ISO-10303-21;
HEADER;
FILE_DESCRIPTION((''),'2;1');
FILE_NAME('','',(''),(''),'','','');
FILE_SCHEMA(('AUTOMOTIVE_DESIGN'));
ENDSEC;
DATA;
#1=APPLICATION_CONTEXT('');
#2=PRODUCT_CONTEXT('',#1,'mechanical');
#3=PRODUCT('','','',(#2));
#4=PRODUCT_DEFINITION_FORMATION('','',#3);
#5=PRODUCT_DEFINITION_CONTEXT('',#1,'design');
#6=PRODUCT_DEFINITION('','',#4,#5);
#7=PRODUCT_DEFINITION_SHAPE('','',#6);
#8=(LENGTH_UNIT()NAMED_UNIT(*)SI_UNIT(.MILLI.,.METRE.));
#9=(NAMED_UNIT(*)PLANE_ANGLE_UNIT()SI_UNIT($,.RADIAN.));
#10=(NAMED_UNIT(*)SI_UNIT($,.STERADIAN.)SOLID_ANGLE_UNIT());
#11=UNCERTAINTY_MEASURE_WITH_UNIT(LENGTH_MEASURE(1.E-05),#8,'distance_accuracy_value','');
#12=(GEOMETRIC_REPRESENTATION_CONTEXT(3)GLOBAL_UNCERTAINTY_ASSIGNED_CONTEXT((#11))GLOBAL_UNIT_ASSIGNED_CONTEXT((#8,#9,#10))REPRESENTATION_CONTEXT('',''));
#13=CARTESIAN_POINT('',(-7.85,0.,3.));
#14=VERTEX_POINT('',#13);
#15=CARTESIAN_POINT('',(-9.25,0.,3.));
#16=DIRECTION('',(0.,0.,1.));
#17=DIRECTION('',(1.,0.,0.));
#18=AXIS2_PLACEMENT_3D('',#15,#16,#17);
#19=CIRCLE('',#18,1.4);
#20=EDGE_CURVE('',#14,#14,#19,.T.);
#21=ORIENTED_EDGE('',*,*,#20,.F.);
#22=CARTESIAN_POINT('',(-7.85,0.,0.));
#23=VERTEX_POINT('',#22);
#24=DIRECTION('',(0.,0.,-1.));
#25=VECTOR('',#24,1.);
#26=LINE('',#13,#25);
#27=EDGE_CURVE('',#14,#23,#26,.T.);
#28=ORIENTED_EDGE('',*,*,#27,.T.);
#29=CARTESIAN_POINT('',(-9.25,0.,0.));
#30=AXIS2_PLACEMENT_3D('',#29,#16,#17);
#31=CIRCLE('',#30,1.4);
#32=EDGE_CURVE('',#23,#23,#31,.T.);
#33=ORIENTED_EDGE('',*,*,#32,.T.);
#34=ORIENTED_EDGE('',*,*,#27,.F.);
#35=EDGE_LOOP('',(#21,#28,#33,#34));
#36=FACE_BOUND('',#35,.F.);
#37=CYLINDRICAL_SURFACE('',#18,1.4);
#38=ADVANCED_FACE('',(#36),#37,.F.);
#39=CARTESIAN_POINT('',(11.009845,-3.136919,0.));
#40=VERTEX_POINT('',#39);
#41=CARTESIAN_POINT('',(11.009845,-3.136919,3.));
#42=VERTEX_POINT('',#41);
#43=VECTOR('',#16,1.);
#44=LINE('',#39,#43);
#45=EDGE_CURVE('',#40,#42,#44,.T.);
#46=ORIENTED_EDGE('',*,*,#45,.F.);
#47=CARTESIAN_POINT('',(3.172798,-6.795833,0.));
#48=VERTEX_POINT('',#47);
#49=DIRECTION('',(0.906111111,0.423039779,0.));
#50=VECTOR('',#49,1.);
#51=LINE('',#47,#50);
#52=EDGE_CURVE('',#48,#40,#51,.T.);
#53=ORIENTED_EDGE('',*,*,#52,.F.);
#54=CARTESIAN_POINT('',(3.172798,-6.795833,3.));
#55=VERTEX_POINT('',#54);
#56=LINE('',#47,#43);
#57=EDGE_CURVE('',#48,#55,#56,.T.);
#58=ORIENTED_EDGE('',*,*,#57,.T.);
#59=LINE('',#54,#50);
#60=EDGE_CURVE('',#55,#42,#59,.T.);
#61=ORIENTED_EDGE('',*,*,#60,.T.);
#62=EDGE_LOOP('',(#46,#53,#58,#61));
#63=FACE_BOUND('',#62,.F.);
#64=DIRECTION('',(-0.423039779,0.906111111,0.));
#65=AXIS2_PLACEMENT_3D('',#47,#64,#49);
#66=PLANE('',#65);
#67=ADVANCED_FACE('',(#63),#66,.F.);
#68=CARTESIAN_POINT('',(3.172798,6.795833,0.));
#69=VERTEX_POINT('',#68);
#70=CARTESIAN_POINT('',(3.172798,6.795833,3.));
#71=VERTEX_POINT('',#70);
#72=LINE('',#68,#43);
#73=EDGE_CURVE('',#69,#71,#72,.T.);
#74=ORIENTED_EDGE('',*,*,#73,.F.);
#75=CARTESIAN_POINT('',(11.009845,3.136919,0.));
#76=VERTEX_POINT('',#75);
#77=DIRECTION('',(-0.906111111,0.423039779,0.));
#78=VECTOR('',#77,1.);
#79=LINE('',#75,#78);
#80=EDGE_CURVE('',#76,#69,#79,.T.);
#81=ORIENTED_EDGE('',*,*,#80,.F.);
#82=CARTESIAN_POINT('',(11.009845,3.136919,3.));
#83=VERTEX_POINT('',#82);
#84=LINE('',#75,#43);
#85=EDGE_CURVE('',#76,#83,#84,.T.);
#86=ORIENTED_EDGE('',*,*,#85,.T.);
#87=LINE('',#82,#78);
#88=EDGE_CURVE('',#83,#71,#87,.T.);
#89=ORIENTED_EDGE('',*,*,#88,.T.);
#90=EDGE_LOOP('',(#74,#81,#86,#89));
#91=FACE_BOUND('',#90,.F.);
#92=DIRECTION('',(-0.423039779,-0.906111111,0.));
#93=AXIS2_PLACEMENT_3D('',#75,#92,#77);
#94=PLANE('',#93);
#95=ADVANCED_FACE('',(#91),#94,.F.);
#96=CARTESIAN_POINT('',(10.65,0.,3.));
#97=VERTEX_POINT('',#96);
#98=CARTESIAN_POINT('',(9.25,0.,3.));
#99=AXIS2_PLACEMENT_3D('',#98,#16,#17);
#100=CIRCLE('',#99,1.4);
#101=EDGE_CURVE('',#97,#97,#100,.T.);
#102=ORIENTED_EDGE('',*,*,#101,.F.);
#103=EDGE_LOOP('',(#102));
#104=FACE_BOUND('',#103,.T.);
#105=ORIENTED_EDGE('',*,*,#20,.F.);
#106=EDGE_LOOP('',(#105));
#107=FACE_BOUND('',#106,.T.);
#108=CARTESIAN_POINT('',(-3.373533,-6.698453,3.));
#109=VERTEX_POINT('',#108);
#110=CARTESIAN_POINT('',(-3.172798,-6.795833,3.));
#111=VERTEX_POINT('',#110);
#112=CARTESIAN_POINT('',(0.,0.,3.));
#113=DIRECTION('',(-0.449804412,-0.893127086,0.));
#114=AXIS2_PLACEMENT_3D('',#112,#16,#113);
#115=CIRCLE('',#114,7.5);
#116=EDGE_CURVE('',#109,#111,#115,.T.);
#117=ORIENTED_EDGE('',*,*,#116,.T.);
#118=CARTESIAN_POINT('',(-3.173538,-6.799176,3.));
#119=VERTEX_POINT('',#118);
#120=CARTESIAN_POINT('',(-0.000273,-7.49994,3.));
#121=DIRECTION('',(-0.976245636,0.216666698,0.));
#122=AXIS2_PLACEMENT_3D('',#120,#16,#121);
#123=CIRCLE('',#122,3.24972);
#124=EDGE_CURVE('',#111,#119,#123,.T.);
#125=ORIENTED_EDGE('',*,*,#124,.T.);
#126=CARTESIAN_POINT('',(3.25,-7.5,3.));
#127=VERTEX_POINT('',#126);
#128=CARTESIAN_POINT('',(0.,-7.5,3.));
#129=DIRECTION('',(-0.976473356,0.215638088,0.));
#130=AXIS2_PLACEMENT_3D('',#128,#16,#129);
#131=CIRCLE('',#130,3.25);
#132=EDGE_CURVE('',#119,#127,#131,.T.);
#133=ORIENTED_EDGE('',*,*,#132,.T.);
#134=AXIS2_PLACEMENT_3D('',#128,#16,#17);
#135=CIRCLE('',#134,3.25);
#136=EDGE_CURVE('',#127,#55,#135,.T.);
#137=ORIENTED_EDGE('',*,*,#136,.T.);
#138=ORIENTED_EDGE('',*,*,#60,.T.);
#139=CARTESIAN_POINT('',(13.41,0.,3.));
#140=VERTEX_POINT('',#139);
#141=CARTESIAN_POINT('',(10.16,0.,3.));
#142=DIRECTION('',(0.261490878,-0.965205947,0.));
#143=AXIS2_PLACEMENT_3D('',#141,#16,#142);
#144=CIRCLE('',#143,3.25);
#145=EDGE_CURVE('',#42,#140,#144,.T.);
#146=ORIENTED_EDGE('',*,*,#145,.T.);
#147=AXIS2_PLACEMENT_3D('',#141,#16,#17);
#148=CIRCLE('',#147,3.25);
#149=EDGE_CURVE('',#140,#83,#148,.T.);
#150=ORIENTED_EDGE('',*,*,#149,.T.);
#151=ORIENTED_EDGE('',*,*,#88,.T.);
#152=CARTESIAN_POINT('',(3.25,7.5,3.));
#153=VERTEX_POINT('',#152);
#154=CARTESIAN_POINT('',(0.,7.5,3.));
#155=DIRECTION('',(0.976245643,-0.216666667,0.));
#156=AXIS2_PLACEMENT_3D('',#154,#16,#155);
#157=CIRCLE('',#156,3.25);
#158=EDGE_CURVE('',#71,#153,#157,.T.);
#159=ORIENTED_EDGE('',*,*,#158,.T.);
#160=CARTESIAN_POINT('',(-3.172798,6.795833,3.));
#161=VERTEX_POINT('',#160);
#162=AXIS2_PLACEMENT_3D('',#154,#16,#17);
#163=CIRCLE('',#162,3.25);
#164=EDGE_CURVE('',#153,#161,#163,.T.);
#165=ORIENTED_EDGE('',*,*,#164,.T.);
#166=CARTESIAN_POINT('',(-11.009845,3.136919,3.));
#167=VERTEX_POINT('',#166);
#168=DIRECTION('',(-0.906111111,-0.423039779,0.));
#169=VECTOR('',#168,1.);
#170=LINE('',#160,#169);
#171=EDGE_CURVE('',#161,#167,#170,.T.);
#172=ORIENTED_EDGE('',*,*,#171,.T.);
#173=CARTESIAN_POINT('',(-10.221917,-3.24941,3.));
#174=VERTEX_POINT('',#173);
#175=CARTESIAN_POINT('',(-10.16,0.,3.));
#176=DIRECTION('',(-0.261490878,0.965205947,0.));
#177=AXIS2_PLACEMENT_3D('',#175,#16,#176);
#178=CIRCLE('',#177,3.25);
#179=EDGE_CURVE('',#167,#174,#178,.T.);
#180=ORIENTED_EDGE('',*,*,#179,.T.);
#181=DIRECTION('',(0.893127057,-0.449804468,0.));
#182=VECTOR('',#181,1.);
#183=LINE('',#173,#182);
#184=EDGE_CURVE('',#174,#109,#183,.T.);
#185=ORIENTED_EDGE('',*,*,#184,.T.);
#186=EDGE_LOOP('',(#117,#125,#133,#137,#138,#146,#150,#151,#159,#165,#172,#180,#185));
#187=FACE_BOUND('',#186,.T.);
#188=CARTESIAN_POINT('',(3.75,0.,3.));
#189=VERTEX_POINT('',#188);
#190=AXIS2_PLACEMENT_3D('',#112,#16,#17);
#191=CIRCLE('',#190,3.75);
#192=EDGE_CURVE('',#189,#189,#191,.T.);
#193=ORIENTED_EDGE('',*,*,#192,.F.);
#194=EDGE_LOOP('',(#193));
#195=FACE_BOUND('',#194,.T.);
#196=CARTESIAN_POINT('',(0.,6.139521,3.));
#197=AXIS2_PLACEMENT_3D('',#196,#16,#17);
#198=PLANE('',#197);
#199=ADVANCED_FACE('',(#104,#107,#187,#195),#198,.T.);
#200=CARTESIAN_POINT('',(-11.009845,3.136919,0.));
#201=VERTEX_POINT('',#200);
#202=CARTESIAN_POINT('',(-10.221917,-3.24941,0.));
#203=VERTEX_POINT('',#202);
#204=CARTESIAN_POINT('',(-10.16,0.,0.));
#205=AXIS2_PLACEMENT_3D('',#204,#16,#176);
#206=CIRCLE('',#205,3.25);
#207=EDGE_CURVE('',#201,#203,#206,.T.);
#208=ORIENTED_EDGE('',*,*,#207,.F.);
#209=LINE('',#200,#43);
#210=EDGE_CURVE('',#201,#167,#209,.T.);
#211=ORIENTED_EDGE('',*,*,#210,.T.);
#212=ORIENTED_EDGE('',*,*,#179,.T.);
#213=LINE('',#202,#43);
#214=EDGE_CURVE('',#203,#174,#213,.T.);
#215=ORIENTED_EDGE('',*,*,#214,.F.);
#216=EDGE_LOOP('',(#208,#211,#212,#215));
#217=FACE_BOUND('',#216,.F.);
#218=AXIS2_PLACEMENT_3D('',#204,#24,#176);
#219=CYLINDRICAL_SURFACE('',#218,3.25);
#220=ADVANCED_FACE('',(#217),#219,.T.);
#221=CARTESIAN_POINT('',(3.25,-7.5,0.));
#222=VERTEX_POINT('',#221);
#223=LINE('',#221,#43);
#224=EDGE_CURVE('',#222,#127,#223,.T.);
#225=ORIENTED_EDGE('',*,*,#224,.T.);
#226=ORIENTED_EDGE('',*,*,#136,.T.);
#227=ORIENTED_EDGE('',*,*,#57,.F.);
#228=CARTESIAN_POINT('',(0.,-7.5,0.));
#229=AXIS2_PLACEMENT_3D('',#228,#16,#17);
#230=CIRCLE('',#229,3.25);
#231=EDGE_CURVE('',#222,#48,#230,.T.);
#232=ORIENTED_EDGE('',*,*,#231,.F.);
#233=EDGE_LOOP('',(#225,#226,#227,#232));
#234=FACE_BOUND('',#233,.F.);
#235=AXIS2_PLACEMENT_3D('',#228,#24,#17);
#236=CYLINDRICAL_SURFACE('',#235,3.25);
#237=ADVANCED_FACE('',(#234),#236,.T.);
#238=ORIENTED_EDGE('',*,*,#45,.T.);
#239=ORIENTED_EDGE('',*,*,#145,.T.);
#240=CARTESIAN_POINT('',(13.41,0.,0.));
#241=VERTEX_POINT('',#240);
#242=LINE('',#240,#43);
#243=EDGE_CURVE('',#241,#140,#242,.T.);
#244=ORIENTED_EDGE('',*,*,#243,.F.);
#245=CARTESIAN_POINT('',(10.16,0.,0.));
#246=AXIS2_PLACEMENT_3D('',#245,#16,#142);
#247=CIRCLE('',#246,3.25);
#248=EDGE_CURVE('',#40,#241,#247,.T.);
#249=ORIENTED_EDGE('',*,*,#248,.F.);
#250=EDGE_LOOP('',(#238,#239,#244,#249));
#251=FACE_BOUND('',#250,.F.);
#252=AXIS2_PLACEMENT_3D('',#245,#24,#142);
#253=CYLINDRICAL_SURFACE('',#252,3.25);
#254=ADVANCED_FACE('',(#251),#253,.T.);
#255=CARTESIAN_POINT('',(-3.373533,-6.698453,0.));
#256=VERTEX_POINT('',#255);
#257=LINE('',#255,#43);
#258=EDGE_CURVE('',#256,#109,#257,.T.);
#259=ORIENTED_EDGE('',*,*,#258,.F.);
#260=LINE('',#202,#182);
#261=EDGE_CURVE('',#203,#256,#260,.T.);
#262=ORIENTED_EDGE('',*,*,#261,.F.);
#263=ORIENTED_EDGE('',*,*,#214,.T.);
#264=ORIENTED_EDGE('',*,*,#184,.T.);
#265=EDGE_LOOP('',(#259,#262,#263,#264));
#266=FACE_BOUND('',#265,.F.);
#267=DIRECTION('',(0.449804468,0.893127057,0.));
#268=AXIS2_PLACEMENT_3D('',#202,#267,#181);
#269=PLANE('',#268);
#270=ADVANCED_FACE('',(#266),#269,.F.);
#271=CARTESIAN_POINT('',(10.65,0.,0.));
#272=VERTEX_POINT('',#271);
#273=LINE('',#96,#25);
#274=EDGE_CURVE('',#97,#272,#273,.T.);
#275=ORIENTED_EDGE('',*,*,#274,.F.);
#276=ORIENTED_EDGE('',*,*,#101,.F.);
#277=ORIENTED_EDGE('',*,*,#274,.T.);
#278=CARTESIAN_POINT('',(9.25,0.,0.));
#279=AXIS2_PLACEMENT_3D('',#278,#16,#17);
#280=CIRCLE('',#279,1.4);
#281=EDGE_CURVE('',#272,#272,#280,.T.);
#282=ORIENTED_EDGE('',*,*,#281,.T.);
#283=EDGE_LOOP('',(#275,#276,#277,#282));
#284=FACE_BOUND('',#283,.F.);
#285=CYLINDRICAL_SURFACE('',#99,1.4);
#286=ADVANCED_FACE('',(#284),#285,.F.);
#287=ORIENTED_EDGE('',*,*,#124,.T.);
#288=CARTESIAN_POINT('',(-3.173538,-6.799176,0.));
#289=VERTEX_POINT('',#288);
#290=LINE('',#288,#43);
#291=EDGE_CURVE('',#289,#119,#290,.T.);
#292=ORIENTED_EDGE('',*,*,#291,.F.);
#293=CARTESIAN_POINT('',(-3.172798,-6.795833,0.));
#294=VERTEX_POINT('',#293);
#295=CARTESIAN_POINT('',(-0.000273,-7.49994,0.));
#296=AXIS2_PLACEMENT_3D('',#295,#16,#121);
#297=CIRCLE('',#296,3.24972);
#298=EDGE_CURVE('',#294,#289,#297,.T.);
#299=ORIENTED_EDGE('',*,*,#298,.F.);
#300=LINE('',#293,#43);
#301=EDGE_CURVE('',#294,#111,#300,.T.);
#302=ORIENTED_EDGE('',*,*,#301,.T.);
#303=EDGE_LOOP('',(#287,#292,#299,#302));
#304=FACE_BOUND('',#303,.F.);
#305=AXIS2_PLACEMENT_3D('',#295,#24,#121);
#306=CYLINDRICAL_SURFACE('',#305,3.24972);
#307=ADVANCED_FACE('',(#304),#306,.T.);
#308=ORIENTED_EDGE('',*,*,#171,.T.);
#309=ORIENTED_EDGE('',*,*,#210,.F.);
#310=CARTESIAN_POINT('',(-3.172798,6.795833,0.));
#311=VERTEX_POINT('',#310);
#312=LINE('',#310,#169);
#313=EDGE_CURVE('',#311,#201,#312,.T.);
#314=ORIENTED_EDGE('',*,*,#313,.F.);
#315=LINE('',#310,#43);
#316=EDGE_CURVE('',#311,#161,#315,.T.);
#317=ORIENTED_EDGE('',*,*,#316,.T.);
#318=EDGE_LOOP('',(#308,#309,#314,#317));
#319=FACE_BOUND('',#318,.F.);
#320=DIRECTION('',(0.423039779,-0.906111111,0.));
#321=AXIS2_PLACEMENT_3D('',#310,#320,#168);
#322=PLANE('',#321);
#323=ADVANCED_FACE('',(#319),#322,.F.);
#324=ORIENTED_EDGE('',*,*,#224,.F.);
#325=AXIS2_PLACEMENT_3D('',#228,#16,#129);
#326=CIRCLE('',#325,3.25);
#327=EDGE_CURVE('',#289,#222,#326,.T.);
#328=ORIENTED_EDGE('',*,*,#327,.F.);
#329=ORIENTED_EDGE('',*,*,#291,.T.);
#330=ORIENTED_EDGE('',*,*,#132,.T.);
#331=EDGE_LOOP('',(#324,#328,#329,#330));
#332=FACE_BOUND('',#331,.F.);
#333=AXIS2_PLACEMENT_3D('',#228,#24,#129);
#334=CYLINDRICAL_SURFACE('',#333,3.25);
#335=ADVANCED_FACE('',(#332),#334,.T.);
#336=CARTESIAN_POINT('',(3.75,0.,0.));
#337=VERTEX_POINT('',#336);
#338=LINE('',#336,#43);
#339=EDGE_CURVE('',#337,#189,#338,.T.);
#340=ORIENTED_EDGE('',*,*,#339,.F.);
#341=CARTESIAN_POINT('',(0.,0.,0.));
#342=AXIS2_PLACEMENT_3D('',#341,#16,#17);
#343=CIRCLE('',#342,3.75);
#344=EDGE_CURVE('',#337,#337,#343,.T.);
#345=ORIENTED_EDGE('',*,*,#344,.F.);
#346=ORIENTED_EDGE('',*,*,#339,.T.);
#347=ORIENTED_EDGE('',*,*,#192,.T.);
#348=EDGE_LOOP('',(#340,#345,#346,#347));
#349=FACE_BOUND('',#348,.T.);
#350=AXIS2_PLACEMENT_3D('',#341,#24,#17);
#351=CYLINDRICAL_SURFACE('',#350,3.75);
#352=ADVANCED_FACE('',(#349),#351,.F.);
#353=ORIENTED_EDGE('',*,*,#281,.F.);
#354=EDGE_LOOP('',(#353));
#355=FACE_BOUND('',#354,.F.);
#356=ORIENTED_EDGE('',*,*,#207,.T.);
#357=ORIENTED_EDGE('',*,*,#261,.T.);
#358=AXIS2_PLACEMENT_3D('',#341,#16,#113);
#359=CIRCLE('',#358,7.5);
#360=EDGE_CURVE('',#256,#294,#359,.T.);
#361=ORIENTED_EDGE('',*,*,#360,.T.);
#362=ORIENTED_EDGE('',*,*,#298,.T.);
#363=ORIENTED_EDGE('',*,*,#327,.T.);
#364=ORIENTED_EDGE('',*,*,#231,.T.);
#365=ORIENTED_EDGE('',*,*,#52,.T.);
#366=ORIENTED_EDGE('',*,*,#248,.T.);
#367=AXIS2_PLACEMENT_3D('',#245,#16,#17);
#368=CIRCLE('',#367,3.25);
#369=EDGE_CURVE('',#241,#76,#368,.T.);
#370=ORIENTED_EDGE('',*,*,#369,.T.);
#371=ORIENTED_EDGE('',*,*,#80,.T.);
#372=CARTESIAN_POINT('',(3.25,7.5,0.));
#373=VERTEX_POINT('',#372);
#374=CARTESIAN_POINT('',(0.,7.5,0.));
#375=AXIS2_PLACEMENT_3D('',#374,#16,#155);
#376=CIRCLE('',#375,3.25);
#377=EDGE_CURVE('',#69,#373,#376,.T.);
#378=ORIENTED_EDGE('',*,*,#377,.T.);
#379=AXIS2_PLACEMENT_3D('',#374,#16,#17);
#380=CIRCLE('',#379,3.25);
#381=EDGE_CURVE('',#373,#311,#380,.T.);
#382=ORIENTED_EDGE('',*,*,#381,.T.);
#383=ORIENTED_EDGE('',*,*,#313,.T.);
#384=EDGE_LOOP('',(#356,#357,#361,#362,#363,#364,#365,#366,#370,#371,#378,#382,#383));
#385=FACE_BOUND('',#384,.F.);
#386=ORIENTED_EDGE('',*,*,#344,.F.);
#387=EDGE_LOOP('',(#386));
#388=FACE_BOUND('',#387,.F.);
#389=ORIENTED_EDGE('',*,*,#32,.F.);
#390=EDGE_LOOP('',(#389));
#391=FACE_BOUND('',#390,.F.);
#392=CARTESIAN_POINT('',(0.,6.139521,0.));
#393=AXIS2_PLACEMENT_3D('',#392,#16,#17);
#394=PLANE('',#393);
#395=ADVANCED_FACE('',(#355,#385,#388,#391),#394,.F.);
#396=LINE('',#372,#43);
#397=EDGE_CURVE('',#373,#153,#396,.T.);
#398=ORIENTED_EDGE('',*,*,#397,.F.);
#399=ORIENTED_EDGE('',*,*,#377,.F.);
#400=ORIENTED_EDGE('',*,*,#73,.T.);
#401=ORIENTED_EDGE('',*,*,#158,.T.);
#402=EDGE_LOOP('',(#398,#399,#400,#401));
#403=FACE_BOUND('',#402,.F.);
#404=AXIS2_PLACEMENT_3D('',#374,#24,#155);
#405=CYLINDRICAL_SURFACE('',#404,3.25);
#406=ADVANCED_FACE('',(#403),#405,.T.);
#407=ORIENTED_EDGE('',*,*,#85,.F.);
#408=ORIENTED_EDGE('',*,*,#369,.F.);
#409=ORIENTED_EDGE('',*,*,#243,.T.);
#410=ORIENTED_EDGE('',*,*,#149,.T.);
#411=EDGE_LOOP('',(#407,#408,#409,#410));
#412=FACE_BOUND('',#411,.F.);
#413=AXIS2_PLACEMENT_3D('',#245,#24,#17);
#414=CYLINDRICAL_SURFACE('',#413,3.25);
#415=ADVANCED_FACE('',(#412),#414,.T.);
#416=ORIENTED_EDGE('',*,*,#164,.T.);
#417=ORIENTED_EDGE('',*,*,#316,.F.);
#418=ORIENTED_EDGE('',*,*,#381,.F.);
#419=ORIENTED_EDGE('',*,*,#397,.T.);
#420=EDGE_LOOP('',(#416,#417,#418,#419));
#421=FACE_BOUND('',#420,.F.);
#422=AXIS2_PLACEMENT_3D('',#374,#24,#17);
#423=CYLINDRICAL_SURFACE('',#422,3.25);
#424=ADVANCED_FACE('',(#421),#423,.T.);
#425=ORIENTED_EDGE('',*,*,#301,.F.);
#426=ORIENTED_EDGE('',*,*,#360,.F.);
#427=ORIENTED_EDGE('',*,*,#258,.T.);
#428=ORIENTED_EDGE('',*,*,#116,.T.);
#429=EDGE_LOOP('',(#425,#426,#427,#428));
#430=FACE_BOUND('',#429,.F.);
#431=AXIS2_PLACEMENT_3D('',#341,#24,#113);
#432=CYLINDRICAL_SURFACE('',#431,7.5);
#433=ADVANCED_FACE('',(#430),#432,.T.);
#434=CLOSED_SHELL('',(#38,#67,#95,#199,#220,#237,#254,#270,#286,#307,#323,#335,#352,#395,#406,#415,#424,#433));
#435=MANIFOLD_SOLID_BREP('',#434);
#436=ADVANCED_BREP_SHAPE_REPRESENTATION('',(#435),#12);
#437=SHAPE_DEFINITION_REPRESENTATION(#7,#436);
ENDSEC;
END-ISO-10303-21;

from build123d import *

# Parameters (mm, degrees)
F0_R     = 3.75
F1_DEPTH = 3
F2_R     = 1.4
F3_DEPTH = 6.096


# Not quite as in the source:
# - a feature names something its author has since deleted; it is built from what else it names


with BuildPart() as f1:
    # F0 (on Top) → F1 (new body)
    with BuildSketch(Plane.XY):
        with BuildLine():
            ThreePointArc((-3.1727983399, 6.7958333333), (0, 4.25), (3.1727983399, 6.7958333333))
            ThreePointArc((3.1727983399, 6.7958333333), (0, 7.5), (-3.1727983399, 6.7958333333))
        make_face()
        with BuildLine():
            Line((11.0098453548, 3.1369193284), (3.1727983399, 6.7958333333))
            ThreePointArc((3.1727983399, 6.7958333333), (5.8592267319, 4.6818225195), (7.3284005906, 1.5951629335))
            ThreePointArc((7.3284005906, 1.5951629335), (8.9045755783, 2.9977340645), (11.0098453548, 3.1369193284))
        make_face()
        with BuildLine():
            ThreePointArc((7.3284005906, 1.5951629335), (5.8592267319, 4.6818225195), (3.1727983399, 6.7958333333))
            ThreePointArc((3.1727983399, 6.7958333333), (0, 4.25), (-3.1727983399, 6.7958333333))
            ThreePointArc((-3.1727983399, 6.7958333333), (-5.8592267319, 4.6818225195), (-7.3284005906, 1.5951629335))
            ThreePointArc((-7.3284005906, 1.5951629335), (-7.0163398656, 0.8245610709), (-6.91, 0))
            ThreePointArc((-6.91, 0), (-7.0163398656, -0.8245610709), (-7.3284005906, -1.5951629335))
            ThreePointArc((-7.3284005906, -1.5951629335), (-5.9282154859, -4.5941551076), (-3.3735330862, -6.6984531435))
            ThreePointArc((-3.3735330862, -6.6984531435), (-3.2735278386, -6.7478897064), (-3.1727983399, -6.7958333333))
            ThreePointArc((-3.1727983399, -6.7958333333), (0, -4.25), (3.1727983399, -6.7958333333))
            ThreePointArc((3.1727983399, -6.7958333333), (5.8592267319, -4.6818225195), (7.3284005906, -1.5951629335))
            ThreePointArc((7.3284005906, -1.5951629335), (6.91, 0), (7.3284005906, 1.5951629335))
        make_face()
        Circle(F0_R, mode=Mode.SUBTRACT)
        with BuildLine():
            ThreePointArc((-3.1727983399, 6.7958333333), (0, 7.5), (3.1727983399, 6.7958333333))
            ThreePointArc((3.1727983399, 6.7958333333), (3.2306419335, 7.1458069768), (3.25, 7.5))
            ThreePointArc((3.25, 7.5), (-0.3541930232, 10.7306419335), (-3.1727983399, 6.7958333333))
        make_face()
        with BuildLine():
            ThreePointArc((-7.3284005906, 1.5951629335), (-5.8592267319, 4.6818225195), (-3.1727983399, 6.7958333333))
            Line((-3.1727983399, 6.7958333333), (-11.0098453548, 3.1369193284))
            ThreePointArc((-11.0098453548, 3.1369193284), (-8.9045755783, 2.9977340645), (-7.3284005906, 1.5951629335))
        make_face()
        with BuildLine():
            ThreePointArc((11.0098453548, 3.1369193284), (8.9045755783, 2.9977340645), (7.3284005906, 1.5951629335))
            ThreePointArc((7.3284005906, 1.5951629335), (7.4569767476, 0.8021831371), (7.5, 0))
            ThreePointArc((7.5, 0), (7.4569767476, -0.8021831371), (7.3284005906, -1.5951629335))
            ThreePointArc((7.3284005906, -1.5951629335), (8.9045755783, -2.9977340645), (11.0098453548, -3.1369193284))
            ThreePointArc((11.0098453548, -3.1369193284), (12.7411332204, -1.9749053898), (13.41, 0))
            ThreePointArc((13.41, 0), (12.7411332204, 1.9749053898), (11.0098453548, 3.1369193284))
        make_face()
        with BuildLine():
            ThreePointArc((7.5, 0), (7.4569767476, 0.8021831371), (7.3284005906, 1.5951629335))
            ThreePointArc((7.3284005906, 1.5951629335), (6.91, 0), (7.3284005906, -1.5951629335))
            ThreePointArc((7.3284005906, -1.5951629335), (7.4569767476, -0.8021831371), (7.5, 0))
        make_face()
        with BuildLine():
            ThreePointArc((-6.91, 0), (-7.0163398656, 0.8245610709), (-7.3284005906, 1.5951629335))
            ThreePointArc((-7.3284005906, 1.5951629335), (-7.5, 0), (-7.3284005906, -1.5951629335))
            ThreePointArc((-7.3284005906, -1.5951629335), (-7.0163398656, -0.8245610709), (-6.91, 0))
        make_face()
        with BuildLine():
            ThreePointArc((-7.3284005906, -1.5951629335), (-7.5, 0), (-7.3284005906, 1.5951629335))
            ThreePointArc((-7.3284005906, 1.5951629335), (-8.9045755783, 2.9977340645), (-11.0098453548, 3.1369193284))
            ThreePointArc((-11.0098453548, 3.1369193284), (-13.3855431521, -0.3979590107), (-10.2219168602, -3.2494101468))
            ThreePointArc((-10.2219168602, -3.2494101468), (-8.5469535603, -2.8214501915), (-7.3284005906, -1.5951629335))
        make_face()
        with BuildLine():
            ThreePointArc((11.0098453548, -3.1369193284), (8.9045755783, -2.9977340645), (7.3284005906, -1.5951629335))
            ThreePointArc((7.3284005906, -1.5951629335), (5.8592267319, -4.6818225195), (3.1727983399, -6.7958333333))
            Line((3.1727983399, -6.7958333333), (11.0098453548, -3.1369193284))
        make_face()
        with BuildLine():
            ThreePointArc((-3.3735330862, -6.6984531435), (-5.9282154859, -4.5941551076), (-7.3284005906, -1.5951629335))
            ThreePointArc((-7.3284005906, -1.5951629335), (-8.5469535603, -2.8214501915), (-10.2219168602, -3.2494101468))
            Line((-10.2219168602, -3.2494101468), (-3.3735330862, -6.6984531435))
        make_face()
        with BuildLine():
            ThreePointArc((3.25, -7.5), (3.2306419335, -7.1458069768), (3.1727983399, -6.7958333333))
            ThreePointArc((3.1727983399, -6.7958333333), (0, -7.5), (-3.1727983399, -6.7958333333))
            ThreePointArc((-3.1727983399, -6.7958333333), (-3.1731688138, -6.7975046766), (-3.1735384072, -6.7991762148))
            ThreePointArc((-3.1735384072, -6.7991762148), (-0.3524912598, -10.7308280536), (3.25, -7.5))
        make_face()
        with BuildLine():
            ThreePointArc((-3.1727983399, -6.7958333333), (0, -7.5), (3.1727983399, -6.7958333333))
            ThreePointArc((3.1727983399, -6.7958333333), (0, -4.25), (-3.1727983399, -6.7958333333))
        make_face()
    extrude(amount=F1_DEPTH)

    # F2 (on face) → F3 (cut)
    with BuildSketch(Plane.XY.offset(3)):
        with Locations((-9.25, 0)):
            Circle(F2_R)
        with Locations((9.25, 0)):
            Circle(F2_R)
    extrude(amount=-F3_DEPTH, mode=Mode.SUBTRACT)


solid = f1.part
